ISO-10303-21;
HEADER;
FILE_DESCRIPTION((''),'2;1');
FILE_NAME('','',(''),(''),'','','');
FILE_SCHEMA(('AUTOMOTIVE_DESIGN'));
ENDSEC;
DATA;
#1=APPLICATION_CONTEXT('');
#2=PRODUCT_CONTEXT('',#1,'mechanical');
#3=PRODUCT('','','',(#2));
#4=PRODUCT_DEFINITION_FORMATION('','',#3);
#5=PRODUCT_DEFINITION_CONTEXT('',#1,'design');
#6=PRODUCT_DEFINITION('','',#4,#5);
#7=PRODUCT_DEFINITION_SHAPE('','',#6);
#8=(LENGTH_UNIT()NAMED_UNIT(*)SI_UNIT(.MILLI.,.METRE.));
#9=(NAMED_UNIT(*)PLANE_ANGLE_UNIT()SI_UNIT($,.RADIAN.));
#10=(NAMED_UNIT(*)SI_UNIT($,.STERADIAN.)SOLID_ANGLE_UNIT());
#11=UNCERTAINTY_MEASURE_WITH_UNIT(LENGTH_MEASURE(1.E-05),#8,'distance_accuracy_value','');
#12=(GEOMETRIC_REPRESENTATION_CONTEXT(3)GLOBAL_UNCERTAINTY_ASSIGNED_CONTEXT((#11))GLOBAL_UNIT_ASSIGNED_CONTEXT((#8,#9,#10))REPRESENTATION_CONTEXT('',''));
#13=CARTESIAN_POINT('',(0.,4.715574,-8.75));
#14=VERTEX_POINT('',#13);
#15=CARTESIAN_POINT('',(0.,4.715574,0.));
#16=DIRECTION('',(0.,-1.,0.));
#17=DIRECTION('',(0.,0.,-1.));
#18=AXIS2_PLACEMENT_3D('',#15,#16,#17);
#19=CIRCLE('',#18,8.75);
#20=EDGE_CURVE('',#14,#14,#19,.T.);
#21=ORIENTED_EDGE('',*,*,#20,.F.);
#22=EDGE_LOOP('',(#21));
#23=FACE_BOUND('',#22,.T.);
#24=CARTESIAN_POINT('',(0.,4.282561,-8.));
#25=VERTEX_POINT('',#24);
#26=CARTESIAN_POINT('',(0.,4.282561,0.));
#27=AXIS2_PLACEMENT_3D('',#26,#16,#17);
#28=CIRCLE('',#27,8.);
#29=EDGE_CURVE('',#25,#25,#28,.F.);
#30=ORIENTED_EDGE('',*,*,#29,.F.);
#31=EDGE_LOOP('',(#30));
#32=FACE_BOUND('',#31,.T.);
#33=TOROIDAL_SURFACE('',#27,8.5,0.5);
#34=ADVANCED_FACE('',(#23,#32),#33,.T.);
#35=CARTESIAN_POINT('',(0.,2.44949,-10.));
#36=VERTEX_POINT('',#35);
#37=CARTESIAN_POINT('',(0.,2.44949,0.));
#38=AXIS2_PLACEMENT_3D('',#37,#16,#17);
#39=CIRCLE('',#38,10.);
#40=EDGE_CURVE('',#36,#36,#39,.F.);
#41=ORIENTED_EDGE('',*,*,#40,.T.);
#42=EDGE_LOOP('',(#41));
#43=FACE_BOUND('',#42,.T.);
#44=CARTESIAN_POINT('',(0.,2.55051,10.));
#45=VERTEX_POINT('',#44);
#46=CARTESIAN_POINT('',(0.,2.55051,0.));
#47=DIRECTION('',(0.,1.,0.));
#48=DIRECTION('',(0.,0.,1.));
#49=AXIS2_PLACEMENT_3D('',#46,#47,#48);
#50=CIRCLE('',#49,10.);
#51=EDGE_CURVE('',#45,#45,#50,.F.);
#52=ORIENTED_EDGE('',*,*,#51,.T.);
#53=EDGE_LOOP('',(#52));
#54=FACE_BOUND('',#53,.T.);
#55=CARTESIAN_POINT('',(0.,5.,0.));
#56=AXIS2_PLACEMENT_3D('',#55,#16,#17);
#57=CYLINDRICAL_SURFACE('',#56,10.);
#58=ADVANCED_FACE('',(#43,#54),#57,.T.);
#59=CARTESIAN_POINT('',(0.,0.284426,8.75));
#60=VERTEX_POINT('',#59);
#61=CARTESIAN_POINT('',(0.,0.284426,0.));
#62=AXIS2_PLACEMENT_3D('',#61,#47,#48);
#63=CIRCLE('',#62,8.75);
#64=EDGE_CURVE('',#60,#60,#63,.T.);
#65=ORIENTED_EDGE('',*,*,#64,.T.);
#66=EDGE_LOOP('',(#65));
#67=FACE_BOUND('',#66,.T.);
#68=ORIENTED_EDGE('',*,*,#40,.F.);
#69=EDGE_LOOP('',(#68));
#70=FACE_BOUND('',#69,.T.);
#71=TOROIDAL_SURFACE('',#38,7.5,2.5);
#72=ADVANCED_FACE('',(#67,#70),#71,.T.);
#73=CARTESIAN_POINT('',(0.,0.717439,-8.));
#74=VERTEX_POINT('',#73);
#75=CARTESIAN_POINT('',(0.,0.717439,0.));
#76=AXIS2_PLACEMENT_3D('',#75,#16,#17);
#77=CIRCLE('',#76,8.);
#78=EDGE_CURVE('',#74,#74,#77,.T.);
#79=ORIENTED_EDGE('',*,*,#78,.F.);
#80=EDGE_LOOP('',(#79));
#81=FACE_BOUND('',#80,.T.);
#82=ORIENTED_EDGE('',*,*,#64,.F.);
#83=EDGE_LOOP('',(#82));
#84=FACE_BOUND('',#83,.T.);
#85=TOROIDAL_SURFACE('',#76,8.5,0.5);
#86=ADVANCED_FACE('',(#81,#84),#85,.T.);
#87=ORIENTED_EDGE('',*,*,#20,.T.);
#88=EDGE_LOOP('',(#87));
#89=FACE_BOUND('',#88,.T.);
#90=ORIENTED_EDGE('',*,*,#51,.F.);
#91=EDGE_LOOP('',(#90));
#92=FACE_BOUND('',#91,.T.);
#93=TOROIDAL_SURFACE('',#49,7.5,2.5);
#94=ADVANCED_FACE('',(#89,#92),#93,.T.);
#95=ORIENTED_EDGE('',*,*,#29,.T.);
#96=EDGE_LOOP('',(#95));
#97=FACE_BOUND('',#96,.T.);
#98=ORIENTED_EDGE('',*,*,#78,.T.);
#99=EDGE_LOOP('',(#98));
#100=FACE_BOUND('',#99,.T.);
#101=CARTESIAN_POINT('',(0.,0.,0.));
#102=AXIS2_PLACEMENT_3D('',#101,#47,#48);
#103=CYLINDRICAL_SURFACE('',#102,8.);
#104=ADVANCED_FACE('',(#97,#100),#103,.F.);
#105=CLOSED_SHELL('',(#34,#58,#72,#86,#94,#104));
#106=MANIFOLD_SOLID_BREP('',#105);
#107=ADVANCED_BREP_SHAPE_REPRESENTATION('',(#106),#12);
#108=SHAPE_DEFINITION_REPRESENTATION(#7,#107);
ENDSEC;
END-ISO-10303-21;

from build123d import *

# Parameters (mm, degrees)
SKETCH3_R           = 10
BOSS_EXTRUDE1_DEPTH = 5
SKETCH4_R           = 8
CUT_EXTRUDE1_DEPTH  = 5
FILLET2_R           = 2.5
FILLET5_R           = 0.5
FILLET6_R           = 0.5


with BuildPart() as part:
    # Sketch3 → Boss-Extrude1 (new body)
    with BuildSketch(Plane(origin=(0, 0, 0), x_dir=(1, 0, 0), z_dir=(0, 1, 0))):
        with Locations(Location((0, 0, 0), (0, 0, 270))):
            Circle(SKETCH3_R)
    extrude(amount=BOSS_EXTRUDE1_DEPTH)

    # Sketch4 → Cut-Extrude1 (cut)
    with BuildSketch(Plane(origin=(0, 5, 0), x_dir=(1, 0, 0), z_dir=(0, 1, 0))):
        with Locations(Location((0, 0, 0), (0, 0, 270))):
            Circle(SKETCH4_R)
    extrude(amount=-CUT_EXTRUDE1_DEPTH, mode=Mode.SUBTRACT)

    # Fillet2
    # the kernel refuses this fillet: 2.5 mm, written as the material it takes off along each edge
    with BuildSketch(Plane(origin=(0, 0, 0), x_dir=(0, 0, 1), z_dir=(-1, 0, 0))) as fillet2_piece_1:
        with BuildLine():
            CenterArc((7.5, 2.449489743), FILLET2_R, 281.536959033, 78.463040967)
            Line((8, 0), (8.01, -0.048989795))
            ThreePointArc((8.01, -0.048989795), (9, -0.05), (10, -0.05))
            Line((10, -0.05), (10.05, 0))
            Line((10.05, 0), (10.05, 2.449489743))
            Line((10.05, 2.449489743), (10, 2.449489743))
        make_face()
    revolve(axis=Axis((0, 0, 0), (0, 1, 0)), mode=Mode.SUBTRACT)
    with BuildSketch(Plane(origin=(0, 5, 0), x_dir=(0, 0, 1), z_dir=(-1, 0, 0))) as fillet2_piece_2:
        with BuildLine():
            CenterArc((7.5, -2.449489743), FILLET2_R, 0, 78.463040967)
            Line((8, 0), (8.01, 0.048989795))
            ThreePointArc((8.01, 0.048989795), (9, 0.05), (10, 0.05))
            Line((10, 0.05), (10.05, 0))
            Line((10.05, 0), (10.05, -2.449489743))
            Line((10.05, -2.449489743), (10, -2.449489743))
        make_face()
    revolve(axis=Axis((0, 5, 0), (0, 1, 0)), mode=Mode.SUBTRACT)

    # Fillet5
    fillet5_edges = [part.edges().sort_by_distance(p)[0] for p in [
        (0, 5, -8),
    ]]
    fillet(fillet5_edges, radius=FILLET5_R)

    # Fillet6
    fillet6_edges = [part.edges().sort_by_distance(p)[0] for p in [
        (0, 0, -8),
    ]]
    fillet(fillet6_edges, radius=FILLET6_R)


solid = part.part
